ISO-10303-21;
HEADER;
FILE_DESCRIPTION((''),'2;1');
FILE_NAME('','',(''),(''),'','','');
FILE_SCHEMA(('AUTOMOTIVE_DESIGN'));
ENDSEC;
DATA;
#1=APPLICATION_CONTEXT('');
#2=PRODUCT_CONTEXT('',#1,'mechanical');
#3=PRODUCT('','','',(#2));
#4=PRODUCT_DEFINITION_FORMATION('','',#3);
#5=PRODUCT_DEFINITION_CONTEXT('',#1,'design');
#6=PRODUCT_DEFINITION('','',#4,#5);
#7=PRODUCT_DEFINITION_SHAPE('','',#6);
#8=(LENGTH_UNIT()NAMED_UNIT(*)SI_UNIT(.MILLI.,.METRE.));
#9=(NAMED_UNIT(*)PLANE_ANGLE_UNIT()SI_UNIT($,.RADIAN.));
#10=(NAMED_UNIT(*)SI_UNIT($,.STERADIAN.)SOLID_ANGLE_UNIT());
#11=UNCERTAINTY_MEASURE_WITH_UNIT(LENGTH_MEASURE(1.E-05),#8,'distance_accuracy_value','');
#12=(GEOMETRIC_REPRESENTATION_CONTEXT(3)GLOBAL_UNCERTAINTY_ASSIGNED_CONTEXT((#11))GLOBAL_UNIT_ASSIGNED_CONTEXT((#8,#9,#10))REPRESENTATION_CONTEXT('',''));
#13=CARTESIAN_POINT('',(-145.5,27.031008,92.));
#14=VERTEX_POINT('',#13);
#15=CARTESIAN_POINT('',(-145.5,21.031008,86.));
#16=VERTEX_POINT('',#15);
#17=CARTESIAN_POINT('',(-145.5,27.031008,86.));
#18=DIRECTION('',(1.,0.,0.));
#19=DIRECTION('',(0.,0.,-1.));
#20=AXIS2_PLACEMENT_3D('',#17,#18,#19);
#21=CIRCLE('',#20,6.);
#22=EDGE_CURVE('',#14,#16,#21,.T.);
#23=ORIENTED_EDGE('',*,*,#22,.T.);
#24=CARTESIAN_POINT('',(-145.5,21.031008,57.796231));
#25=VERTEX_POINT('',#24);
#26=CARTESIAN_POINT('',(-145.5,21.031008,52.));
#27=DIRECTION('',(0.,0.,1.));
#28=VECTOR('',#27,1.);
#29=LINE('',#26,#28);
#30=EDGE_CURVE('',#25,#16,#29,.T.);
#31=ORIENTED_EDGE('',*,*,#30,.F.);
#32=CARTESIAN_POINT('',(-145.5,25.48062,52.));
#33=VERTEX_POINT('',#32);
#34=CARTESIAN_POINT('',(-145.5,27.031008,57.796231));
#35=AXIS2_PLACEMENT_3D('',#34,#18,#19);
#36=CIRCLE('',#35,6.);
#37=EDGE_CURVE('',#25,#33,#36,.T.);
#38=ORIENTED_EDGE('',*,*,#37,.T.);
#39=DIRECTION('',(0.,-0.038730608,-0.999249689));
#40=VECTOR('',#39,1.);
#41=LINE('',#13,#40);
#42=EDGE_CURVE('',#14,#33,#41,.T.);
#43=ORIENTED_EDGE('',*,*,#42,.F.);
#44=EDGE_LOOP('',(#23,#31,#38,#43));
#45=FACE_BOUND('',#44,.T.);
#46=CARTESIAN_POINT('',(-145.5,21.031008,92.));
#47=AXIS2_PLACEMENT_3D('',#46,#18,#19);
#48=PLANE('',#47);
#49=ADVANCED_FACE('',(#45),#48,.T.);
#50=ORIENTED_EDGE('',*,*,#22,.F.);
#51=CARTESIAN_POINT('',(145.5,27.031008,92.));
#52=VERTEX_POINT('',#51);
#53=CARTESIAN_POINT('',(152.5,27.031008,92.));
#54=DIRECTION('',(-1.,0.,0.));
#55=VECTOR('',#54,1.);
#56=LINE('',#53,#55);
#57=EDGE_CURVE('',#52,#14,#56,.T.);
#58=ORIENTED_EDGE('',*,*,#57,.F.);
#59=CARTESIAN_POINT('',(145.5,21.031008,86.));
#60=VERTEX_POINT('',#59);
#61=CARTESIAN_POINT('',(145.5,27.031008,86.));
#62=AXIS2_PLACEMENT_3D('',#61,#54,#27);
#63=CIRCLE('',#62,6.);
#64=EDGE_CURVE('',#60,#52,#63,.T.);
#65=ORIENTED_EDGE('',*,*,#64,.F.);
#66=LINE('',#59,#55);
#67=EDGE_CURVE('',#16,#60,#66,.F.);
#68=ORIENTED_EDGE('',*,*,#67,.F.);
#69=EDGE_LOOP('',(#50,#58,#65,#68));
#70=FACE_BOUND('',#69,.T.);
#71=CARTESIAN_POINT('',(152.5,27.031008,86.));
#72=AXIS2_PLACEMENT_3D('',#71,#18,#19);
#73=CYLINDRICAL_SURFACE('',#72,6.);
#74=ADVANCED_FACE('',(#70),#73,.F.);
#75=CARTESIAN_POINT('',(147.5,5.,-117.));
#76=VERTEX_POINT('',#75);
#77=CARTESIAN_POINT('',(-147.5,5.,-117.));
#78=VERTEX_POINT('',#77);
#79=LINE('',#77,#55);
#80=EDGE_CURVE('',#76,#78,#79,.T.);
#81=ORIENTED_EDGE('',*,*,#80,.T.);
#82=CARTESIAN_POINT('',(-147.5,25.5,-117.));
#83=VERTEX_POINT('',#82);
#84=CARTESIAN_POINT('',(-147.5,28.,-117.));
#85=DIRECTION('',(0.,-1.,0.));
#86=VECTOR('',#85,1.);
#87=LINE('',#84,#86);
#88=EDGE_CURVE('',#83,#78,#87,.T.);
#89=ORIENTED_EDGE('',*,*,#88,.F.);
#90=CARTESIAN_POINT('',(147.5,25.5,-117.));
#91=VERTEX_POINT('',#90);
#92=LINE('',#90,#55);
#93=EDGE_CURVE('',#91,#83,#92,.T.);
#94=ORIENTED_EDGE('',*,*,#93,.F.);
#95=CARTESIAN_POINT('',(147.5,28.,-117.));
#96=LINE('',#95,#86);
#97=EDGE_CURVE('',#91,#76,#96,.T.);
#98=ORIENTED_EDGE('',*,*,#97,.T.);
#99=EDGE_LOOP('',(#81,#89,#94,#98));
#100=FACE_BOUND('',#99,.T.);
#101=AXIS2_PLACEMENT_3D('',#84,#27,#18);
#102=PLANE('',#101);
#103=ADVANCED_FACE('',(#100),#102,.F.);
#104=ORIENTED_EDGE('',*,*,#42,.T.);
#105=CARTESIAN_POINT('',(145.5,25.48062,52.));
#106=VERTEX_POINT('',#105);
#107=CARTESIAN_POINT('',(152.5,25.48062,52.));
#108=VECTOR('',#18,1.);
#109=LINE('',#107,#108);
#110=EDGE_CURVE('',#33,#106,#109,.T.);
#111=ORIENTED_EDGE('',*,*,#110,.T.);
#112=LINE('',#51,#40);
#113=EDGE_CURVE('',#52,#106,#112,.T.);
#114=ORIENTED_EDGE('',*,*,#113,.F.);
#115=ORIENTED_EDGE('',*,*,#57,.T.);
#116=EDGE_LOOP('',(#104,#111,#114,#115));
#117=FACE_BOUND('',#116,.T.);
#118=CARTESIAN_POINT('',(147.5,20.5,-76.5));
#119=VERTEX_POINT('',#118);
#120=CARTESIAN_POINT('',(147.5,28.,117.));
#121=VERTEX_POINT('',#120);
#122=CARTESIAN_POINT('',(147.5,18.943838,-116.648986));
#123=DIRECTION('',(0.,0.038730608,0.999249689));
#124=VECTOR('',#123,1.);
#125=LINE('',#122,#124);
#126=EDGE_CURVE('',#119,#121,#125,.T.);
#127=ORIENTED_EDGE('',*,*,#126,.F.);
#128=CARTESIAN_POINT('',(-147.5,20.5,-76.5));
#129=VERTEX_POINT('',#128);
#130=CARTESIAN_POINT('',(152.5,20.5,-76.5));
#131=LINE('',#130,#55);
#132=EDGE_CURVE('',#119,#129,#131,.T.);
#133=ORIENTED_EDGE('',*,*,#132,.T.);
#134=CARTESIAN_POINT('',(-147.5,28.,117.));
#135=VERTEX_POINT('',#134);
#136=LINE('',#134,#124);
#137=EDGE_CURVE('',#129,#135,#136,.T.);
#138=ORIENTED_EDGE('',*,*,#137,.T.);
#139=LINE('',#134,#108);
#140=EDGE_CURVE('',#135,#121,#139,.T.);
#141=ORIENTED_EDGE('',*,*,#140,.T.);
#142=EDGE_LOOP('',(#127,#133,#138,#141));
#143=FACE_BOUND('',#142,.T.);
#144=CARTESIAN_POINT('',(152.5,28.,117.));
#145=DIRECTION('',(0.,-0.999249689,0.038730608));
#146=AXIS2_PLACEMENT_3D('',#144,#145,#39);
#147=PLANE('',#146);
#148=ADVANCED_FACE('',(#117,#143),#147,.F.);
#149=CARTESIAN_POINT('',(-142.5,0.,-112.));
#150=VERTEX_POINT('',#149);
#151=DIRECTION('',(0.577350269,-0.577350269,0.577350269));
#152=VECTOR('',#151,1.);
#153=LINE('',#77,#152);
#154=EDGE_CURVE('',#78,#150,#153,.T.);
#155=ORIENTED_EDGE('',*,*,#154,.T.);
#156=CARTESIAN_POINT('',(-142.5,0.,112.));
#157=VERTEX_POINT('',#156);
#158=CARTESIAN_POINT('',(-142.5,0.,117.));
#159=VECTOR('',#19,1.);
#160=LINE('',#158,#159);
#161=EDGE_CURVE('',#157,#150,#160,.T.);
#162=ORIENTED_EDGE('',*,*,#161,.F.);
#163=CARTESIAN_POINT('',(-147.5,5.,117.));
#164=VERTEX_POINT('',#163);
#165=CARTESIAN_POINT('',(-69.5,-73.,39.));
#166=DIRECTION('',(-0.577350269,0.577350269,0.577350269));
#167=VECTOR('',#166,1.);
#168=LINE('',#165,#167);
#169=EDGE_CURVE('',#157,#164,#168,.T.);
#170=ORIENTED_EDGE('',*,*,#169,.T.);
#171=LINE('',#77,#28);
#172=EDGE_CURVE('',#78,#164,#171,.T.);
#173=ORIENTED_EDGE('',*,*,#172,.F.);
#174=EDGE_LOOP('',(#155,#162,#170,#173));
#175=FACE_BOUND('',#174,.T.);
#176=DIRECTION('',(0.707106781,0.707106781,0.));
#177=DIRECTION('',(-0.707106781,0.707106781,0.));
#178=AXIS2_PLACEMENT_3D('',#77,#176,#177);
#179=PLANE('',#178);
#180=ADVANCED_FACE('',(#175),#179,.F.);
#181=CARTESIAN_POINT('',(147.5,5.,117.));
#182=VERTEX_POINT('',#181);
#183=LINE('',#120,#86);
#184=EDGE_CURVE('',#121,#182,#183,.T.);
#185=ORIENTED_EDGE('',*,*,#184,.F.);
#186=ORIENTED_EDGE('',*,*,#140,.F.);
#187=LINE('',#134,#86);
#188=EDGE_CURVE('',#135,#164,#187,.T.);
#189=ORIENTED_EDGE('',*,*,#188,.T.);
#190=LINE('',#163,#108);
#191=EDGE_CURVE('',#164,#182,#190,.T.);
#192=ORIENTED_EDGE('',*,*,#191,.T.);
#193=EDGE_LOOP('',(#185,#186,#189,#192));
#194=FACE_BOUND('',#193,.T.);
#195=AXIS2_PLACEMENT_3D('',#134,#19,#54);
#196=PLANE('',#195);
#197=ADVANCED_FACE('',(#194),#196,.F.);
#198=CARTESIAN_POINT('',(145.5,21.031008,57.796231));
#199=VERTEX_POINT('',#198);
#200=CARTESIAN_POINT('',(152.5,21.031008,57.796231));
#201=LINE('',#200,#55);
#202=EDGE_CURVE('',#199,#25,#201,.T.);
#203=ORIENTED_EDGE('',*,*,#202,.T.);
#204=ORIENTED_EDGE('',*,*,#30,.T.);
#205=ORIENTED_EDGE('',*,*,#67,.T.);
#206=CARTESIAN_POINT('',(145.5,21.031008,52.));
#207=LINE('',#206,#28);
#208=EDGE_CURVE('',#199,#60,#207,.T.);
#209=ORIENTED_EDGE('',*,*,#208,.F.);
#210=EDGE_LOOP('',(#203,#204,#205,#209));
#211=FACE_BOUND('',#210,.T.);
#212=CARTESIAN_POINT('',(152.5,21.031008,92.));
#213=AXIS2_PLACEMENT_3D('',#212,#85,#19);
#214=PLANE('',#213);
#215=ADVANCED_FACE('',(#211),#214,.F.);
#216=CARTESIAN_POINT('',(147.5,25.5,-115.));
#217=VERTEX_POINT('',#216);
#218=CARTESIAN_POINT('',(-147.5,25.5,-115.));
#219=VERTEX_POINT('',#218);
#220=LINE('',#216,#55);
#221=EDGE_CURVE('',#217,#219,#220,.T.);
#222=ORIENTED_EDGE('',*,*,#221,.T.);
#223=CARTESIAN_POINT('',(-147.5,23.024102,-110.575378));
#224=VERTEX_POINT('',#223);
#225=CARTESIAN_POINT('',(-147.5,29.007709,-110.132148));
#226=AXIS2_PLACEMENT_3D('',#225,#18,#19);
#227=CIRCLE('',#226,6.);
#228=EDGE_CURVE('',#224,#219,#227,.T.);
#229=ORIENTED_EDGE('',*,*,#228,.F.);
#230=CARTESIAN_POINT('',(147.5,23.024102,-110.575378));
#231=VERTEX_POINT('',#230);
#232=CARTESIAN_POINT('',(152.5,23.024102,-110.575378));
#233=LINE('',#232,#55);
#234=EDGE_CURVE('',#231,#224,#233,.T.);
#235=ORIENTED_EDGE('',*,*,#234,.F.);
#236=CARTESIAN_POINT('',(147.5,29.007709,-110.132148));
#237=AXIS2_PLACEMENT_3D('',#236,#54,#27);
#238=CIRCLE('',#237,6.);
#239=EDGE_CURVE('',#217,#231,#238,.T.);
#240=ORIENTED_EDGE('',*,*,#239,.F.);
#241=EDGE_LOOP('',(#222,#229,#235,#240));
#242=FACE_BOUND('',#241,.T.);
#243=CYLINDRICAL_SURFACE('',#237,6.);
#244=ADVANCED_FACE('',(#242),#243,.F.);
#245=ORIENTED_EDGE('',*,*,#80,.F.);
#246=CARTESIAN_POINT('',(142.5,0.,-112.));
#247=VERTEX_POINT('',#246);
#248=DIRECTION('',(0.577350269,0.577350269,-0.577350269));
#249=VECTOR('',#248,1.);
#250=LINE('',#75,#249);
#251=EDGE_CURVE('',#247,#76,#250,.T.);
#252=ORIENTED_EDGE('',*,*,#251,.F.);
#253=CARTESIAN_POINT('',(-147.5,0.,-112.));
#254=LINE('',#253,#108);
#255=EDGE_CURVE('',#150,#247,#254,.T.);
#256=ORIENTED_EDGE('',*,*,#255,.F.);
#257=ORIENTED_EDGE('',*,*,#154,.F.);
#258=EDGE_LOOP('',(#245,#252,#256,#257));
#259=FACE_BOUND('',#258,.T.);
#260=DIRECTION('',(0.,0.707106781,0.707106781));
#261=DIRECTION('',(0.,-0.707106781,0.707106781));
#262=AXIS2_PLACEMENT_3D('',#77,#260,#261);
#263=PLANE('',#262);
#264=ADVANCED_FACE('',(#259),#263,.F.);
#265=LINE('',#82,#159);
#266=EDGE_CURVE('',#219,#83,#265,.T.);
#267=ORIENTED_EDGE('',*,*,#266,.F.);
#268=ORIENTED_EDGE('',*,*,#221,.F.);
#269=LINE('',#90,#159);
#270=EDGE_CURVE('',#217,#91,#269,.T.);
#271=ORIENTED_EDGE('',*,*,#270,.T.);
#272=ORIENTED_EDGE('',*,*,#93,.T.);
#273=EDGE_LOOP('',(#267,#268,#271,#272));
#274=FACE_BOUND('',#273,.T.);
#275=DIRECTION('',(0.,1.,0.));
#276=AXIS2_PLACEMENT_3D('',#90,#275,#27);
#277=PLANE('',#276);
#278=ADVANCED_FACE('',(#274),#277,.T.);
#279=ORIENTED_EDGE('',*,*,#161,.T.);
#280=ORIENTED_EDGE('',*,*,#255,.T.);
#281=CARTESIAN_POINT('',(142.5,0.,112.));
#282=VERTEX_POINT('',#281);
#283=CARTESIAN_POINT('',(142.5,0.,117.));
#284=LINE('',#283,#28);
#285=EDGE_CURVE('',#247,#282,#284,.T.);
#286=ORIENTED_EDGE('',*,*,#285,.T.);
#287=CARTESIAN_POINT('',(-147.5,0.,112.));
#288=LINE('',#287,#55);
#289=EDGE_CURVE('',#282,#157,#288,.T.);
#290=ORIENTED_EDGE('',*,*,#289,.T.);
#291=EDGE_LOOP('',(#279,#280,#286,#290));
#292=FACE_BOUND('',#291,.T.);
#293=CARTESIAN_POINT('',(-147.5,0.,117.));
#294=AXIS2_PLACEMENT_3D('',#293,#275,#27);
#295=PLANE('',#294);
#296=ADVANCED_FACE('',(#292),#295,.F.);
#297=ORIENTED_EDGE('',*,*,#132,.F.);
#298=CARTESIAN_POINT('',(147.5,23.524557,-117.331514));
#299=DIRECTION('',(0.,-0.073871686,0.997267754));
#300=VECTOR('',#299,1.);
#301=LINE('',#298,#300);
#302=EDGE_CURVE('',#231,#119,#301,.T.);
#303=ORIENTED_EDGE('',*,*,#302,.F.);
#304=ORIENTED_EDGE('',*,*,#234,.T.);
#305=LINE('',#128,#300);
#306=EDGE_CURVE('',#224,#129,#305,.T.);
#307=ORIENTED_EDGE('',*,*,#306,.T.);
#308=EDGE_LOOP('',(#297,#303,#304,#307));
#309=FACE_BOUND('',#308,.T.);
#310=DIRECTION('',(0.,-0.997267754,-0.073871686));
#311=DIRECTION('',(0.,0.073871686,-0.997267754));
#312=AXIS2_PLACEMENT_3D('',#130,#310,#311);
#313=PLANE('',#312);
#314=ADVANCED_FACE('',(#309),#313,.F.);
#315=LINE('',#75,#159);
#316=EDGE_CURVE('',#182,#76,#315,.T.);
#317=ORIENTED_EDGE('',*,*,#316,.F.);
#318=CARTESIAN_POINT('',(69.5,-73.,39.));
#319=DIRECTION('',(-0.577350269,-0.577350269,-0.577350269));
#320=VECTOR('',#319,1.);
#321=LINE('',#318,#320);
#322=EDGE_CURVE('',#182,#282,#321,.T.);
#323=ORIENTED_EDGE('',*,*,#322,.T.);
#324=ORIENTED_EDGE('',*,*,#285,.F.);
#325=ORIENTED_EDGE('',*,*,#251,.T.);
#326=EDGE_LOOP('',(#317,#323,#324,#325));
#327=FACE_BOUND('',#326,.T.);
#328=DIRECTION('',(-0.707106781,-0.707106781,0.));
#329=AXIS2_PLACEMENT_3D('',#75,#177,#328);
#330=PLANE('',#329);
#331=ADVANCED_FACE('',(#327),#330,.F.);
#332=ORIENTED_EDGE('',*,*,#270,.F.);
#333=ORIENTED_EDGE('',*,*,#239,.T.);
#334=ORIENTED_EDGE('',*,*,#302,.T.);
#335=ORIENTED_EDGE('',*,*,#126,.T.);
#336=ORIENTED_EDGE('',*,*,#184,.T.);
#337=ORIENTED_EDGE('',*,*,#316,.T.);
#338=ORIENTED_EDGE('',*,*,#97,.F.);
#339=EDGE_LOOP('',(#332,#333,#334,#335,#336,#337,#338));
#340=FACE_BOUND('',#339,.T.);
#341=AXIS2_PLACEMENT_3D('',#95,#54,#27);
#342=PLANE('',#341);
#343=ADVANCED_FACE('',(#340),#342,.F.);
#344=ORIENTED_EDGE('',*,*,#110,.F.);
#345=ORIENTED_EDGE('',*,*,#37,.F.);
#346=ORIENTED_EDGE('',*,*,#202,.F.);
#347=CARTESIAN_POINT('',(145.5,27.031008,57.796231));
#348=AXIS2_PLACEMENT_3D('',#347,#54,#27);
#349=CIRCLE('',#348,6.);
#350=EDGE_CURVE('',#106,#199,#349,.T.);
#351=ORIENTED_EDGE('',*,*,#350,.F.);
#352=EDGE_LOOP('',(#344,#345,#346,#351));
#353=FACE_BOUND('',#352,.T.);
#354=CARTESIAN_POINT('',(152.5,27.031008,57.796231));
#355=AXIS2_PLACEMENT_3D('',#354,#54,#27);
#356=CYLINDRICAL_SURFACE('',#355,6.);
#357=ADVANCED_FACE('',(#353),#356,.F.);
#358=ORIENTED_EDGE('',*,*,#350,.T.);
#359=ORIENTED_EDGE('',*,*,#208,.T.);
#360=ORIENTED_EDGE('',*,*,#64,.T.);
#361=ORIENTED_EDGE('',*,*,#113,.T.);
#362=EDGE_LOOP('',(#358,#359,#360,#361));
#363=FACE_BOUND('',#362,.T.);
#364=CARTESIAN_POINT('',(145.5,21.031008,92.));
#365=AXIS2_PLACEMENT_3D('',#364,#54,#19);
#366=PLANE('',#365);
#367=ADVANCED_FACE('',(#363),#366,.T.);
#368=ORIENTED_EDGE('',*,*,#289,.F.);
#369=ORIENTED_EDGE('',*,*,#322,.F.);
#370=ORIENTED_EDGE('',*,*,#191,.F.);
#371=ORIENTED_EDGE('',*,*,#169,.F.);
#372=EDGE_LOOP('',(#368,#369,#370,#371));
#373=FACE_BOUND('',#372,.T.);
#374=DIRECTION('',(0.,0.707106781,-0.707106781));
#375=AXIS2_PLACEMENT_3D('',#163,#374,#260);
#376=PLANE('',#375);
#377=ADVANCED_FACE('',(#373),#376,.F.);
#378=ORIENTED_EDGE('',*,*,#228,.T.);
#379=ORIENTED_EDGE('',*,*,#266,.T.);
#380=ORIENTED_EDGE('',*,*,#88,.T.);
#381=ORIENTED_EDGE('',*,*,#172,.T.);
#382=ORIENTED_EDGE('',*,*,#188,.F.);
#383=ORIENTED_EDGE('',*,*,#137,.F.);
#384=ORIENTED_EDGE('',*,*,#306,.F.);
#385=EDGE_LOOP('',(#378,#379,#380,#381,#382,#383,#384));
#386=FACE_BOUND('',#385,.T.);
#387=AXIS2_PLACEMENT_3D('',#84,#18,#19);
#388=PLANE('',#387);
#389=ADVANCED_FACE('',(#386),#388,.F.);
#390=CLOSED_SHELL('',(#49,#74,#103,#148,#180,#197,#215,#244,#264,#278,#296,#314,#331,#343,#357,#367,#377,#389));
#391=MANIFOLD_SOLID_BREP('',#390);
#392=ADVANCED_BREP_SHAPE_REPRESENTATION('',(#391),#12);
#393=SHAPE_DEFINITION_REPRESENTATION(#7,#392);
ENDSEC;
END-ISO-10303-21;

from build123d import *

# Parameters (mm, degrees)
SKETCH1_W           = 295
SKETCH1_H           = 234
BOSS_EXTRUDE1_DEPTH = 28
CUT_EXTRUDE1_DEPTH  = 300
CHAMFER1_SIZE       = 5
CHAMFER2_SIZE       = 5
SKETCH3_W           = 40
SKETCH3_H           = 12.256911823
CUT_EXTRUDE2_DEPTH  = 300
BOSS_EXTRUDE2_DEPTH = 2
BOSS_EXTRUDE3_DEPTH = 295
FILLET1_R           = 6
FILLET2_R           = 6
CHAMFER3_SIZE       = 5


with BuildPart() as part:
    # Sketch1 → Boss-Extrude1 (new body)
    with BuildSketch(Plane(origin=(0, 0, 0), x_dir=(1, 0, 0), z_dir=(0, 1, 0))):
        Rectangle(SKETCH1_W, SKETCH1_H)
    extrude(amount=BOSS_EXTRUDE1_DEPTH)

    # Sketch2 → Cut-Extrude1 (cut)
    with BuildSketch(Plane.ZY.offset(147.5)):
        Polygon((117, 28), (-76.5, 20.5), (-117, 23.5), (-117, 28), align=None)
    extrude(amount=-CUT_EXTRUDE1_DEPTH, mode=Mode.SUBTRACT)

    # Chamfer1
    chamfer1_edges = [part.edges().sort_by_distance(p)[0] for p in [
        (147.5, 0, 0),
        (-147.5, 0, 0),
    ]]
    chamfer(chamfer1_edges, length=CHAMFER1_SIZE)

    # Chamfer2
    chamfer2_edges = [part.edges().sort_by_distance(p)[0] for p in [
        (0, 0, 117),
    ]]
    chamfer(chamfer2_edges, length=CHAMFER2_SIZE)

    # Sketch3 → Cut-Extrude2 (cut)
    with BuildSketch(Plane.ZY.offset(147.5)):
        with Locations((72, 27.159463664)):
            Rectangle(SKETCH3_W, SKETCH3_H)
    extrude(amount=-CUT_EXTRUDE2_DEPTH, mode=Mode.SUBTRACT)

    # Sketch4 → Boss-Extrude2 (add)
    with BuildSketch(Plane.ZY.offset(147.5)):
        Polygon((92, 27.031007752), (52, 25.480620155), (52, 21.031007752), (92, 21.031007752), align=None)
    boss_extrude2 = extrude(amount=-BOSS_EXTRUDE2_DEPTH)

    # Mirror1: Boss-Extrude2 across plane
    add(boss_extrude2.mirror(Plane(origin=(0, 0, 0), x_dir=(0, 0, 1), z_dir=(1, 0, 0))))

    # Sketch5 → Boss-Extrude3 (add)
    with BuildSketch(Plane.ZY.offset(147.5)):
        Polygon((-117, 23.5), (-115, 23.351851852), (-115, 25.5), (-117, 25.5), align=None)
    extrude(amount=-BOSS_EXTRUDE3_DEPTH)

    # Fillet1
    # the kernel refuses this fillet: 6 mm, written as the material it adds along each edge
    with BuildSketch(Plane(origin=(-147.5, 23.351851852, -115), x_dir=(0, -0.0738716855153118, 0.997267754456709), z_dir=(1, 0, 0))) as fillet1_piece_1:
        with BuildLine():
            CenterArc((4.436743859, -6), FILLET1_R, 90, 49.987589721)
            Line((-0.158687324, -2.14227888), (-0.250595948, -2.065124458))
            ThreePointArc((-0.250595948, -2.065124458), (-0.199015793, -1.062274838), (-0.119672131, 0.008864602))
            Line((-0.119672131, 0.008864602), (0, 0.12))
            Line((0, 0.12), (4.436743859, 0.12))
            Line((4.436743859, 0.12), (4.436743859, 0))
        make_face()
    extrude(amount=295)

    # Fillet2
    # the kernel refuses this fillet: 6 mm, written as the material it adds along each edge
    with BuildSketch(Plane(origin=(-145.5, 21.031007752, 92), x_dir=(0, 1, 0), z_dir=(1, 0, 0))) as fillet2_piece_1:
        with BuildLine():
            CenterArc((FILLET2_R, -FILLET2_R), FILLET2_R, 90, 90)
            Line((0, -FILLET2_R), (-FILLET2_R * 0.02, -FILLET2_R))
            Line((-FILLET2_R * 0.02, -FILLET2_R), (-FILLET2_R * 0.02, FILLET2_R * 0.02))
            Line((-FILLET2_R * 0.02, FILLET2_R * 0.02), (FILLET2_R, FILLET2_R * 0.02))
            Line((FILLET2_R, FILLET2_R * 0.02), (FILLET2_R, 0))
        make_face()
    extrude(amount=291)
    with BuildSketch(Plane(origin=(-145.5, 21.031007752, 52), x_dir=(0, 1, 0), z_dir=(1, 0, 0))) as fillet2_piece_2:
        with BuildLine():
            CenterArc((6, 5.796231388), FILLET2_R, 180, 75.024977641)
            Line((0, 5.796231388), (-0.12, 5.796231388))
            Line((-0.12, 5.796231388), (-0.12, 0))
            Line((-0.12, 0), (0, -0.12))
            ThreePointArc((0, -0.12), (2.224806202, -0.12), (4.418604651, -0.115924628))
            Line((4.418604651, -0.115924628), (4.449612403, 0))
        make_face()
    extrude(amount=291)

    # Chamfer3
    chamfer3_edges = [part.edges().sort_by_distance(p)[0] for p in [
        (0, 0, -117),
    ]]
    chamfer(chamfer3_edges, length=CHAMFER3_SIZE)


solid = part.part
